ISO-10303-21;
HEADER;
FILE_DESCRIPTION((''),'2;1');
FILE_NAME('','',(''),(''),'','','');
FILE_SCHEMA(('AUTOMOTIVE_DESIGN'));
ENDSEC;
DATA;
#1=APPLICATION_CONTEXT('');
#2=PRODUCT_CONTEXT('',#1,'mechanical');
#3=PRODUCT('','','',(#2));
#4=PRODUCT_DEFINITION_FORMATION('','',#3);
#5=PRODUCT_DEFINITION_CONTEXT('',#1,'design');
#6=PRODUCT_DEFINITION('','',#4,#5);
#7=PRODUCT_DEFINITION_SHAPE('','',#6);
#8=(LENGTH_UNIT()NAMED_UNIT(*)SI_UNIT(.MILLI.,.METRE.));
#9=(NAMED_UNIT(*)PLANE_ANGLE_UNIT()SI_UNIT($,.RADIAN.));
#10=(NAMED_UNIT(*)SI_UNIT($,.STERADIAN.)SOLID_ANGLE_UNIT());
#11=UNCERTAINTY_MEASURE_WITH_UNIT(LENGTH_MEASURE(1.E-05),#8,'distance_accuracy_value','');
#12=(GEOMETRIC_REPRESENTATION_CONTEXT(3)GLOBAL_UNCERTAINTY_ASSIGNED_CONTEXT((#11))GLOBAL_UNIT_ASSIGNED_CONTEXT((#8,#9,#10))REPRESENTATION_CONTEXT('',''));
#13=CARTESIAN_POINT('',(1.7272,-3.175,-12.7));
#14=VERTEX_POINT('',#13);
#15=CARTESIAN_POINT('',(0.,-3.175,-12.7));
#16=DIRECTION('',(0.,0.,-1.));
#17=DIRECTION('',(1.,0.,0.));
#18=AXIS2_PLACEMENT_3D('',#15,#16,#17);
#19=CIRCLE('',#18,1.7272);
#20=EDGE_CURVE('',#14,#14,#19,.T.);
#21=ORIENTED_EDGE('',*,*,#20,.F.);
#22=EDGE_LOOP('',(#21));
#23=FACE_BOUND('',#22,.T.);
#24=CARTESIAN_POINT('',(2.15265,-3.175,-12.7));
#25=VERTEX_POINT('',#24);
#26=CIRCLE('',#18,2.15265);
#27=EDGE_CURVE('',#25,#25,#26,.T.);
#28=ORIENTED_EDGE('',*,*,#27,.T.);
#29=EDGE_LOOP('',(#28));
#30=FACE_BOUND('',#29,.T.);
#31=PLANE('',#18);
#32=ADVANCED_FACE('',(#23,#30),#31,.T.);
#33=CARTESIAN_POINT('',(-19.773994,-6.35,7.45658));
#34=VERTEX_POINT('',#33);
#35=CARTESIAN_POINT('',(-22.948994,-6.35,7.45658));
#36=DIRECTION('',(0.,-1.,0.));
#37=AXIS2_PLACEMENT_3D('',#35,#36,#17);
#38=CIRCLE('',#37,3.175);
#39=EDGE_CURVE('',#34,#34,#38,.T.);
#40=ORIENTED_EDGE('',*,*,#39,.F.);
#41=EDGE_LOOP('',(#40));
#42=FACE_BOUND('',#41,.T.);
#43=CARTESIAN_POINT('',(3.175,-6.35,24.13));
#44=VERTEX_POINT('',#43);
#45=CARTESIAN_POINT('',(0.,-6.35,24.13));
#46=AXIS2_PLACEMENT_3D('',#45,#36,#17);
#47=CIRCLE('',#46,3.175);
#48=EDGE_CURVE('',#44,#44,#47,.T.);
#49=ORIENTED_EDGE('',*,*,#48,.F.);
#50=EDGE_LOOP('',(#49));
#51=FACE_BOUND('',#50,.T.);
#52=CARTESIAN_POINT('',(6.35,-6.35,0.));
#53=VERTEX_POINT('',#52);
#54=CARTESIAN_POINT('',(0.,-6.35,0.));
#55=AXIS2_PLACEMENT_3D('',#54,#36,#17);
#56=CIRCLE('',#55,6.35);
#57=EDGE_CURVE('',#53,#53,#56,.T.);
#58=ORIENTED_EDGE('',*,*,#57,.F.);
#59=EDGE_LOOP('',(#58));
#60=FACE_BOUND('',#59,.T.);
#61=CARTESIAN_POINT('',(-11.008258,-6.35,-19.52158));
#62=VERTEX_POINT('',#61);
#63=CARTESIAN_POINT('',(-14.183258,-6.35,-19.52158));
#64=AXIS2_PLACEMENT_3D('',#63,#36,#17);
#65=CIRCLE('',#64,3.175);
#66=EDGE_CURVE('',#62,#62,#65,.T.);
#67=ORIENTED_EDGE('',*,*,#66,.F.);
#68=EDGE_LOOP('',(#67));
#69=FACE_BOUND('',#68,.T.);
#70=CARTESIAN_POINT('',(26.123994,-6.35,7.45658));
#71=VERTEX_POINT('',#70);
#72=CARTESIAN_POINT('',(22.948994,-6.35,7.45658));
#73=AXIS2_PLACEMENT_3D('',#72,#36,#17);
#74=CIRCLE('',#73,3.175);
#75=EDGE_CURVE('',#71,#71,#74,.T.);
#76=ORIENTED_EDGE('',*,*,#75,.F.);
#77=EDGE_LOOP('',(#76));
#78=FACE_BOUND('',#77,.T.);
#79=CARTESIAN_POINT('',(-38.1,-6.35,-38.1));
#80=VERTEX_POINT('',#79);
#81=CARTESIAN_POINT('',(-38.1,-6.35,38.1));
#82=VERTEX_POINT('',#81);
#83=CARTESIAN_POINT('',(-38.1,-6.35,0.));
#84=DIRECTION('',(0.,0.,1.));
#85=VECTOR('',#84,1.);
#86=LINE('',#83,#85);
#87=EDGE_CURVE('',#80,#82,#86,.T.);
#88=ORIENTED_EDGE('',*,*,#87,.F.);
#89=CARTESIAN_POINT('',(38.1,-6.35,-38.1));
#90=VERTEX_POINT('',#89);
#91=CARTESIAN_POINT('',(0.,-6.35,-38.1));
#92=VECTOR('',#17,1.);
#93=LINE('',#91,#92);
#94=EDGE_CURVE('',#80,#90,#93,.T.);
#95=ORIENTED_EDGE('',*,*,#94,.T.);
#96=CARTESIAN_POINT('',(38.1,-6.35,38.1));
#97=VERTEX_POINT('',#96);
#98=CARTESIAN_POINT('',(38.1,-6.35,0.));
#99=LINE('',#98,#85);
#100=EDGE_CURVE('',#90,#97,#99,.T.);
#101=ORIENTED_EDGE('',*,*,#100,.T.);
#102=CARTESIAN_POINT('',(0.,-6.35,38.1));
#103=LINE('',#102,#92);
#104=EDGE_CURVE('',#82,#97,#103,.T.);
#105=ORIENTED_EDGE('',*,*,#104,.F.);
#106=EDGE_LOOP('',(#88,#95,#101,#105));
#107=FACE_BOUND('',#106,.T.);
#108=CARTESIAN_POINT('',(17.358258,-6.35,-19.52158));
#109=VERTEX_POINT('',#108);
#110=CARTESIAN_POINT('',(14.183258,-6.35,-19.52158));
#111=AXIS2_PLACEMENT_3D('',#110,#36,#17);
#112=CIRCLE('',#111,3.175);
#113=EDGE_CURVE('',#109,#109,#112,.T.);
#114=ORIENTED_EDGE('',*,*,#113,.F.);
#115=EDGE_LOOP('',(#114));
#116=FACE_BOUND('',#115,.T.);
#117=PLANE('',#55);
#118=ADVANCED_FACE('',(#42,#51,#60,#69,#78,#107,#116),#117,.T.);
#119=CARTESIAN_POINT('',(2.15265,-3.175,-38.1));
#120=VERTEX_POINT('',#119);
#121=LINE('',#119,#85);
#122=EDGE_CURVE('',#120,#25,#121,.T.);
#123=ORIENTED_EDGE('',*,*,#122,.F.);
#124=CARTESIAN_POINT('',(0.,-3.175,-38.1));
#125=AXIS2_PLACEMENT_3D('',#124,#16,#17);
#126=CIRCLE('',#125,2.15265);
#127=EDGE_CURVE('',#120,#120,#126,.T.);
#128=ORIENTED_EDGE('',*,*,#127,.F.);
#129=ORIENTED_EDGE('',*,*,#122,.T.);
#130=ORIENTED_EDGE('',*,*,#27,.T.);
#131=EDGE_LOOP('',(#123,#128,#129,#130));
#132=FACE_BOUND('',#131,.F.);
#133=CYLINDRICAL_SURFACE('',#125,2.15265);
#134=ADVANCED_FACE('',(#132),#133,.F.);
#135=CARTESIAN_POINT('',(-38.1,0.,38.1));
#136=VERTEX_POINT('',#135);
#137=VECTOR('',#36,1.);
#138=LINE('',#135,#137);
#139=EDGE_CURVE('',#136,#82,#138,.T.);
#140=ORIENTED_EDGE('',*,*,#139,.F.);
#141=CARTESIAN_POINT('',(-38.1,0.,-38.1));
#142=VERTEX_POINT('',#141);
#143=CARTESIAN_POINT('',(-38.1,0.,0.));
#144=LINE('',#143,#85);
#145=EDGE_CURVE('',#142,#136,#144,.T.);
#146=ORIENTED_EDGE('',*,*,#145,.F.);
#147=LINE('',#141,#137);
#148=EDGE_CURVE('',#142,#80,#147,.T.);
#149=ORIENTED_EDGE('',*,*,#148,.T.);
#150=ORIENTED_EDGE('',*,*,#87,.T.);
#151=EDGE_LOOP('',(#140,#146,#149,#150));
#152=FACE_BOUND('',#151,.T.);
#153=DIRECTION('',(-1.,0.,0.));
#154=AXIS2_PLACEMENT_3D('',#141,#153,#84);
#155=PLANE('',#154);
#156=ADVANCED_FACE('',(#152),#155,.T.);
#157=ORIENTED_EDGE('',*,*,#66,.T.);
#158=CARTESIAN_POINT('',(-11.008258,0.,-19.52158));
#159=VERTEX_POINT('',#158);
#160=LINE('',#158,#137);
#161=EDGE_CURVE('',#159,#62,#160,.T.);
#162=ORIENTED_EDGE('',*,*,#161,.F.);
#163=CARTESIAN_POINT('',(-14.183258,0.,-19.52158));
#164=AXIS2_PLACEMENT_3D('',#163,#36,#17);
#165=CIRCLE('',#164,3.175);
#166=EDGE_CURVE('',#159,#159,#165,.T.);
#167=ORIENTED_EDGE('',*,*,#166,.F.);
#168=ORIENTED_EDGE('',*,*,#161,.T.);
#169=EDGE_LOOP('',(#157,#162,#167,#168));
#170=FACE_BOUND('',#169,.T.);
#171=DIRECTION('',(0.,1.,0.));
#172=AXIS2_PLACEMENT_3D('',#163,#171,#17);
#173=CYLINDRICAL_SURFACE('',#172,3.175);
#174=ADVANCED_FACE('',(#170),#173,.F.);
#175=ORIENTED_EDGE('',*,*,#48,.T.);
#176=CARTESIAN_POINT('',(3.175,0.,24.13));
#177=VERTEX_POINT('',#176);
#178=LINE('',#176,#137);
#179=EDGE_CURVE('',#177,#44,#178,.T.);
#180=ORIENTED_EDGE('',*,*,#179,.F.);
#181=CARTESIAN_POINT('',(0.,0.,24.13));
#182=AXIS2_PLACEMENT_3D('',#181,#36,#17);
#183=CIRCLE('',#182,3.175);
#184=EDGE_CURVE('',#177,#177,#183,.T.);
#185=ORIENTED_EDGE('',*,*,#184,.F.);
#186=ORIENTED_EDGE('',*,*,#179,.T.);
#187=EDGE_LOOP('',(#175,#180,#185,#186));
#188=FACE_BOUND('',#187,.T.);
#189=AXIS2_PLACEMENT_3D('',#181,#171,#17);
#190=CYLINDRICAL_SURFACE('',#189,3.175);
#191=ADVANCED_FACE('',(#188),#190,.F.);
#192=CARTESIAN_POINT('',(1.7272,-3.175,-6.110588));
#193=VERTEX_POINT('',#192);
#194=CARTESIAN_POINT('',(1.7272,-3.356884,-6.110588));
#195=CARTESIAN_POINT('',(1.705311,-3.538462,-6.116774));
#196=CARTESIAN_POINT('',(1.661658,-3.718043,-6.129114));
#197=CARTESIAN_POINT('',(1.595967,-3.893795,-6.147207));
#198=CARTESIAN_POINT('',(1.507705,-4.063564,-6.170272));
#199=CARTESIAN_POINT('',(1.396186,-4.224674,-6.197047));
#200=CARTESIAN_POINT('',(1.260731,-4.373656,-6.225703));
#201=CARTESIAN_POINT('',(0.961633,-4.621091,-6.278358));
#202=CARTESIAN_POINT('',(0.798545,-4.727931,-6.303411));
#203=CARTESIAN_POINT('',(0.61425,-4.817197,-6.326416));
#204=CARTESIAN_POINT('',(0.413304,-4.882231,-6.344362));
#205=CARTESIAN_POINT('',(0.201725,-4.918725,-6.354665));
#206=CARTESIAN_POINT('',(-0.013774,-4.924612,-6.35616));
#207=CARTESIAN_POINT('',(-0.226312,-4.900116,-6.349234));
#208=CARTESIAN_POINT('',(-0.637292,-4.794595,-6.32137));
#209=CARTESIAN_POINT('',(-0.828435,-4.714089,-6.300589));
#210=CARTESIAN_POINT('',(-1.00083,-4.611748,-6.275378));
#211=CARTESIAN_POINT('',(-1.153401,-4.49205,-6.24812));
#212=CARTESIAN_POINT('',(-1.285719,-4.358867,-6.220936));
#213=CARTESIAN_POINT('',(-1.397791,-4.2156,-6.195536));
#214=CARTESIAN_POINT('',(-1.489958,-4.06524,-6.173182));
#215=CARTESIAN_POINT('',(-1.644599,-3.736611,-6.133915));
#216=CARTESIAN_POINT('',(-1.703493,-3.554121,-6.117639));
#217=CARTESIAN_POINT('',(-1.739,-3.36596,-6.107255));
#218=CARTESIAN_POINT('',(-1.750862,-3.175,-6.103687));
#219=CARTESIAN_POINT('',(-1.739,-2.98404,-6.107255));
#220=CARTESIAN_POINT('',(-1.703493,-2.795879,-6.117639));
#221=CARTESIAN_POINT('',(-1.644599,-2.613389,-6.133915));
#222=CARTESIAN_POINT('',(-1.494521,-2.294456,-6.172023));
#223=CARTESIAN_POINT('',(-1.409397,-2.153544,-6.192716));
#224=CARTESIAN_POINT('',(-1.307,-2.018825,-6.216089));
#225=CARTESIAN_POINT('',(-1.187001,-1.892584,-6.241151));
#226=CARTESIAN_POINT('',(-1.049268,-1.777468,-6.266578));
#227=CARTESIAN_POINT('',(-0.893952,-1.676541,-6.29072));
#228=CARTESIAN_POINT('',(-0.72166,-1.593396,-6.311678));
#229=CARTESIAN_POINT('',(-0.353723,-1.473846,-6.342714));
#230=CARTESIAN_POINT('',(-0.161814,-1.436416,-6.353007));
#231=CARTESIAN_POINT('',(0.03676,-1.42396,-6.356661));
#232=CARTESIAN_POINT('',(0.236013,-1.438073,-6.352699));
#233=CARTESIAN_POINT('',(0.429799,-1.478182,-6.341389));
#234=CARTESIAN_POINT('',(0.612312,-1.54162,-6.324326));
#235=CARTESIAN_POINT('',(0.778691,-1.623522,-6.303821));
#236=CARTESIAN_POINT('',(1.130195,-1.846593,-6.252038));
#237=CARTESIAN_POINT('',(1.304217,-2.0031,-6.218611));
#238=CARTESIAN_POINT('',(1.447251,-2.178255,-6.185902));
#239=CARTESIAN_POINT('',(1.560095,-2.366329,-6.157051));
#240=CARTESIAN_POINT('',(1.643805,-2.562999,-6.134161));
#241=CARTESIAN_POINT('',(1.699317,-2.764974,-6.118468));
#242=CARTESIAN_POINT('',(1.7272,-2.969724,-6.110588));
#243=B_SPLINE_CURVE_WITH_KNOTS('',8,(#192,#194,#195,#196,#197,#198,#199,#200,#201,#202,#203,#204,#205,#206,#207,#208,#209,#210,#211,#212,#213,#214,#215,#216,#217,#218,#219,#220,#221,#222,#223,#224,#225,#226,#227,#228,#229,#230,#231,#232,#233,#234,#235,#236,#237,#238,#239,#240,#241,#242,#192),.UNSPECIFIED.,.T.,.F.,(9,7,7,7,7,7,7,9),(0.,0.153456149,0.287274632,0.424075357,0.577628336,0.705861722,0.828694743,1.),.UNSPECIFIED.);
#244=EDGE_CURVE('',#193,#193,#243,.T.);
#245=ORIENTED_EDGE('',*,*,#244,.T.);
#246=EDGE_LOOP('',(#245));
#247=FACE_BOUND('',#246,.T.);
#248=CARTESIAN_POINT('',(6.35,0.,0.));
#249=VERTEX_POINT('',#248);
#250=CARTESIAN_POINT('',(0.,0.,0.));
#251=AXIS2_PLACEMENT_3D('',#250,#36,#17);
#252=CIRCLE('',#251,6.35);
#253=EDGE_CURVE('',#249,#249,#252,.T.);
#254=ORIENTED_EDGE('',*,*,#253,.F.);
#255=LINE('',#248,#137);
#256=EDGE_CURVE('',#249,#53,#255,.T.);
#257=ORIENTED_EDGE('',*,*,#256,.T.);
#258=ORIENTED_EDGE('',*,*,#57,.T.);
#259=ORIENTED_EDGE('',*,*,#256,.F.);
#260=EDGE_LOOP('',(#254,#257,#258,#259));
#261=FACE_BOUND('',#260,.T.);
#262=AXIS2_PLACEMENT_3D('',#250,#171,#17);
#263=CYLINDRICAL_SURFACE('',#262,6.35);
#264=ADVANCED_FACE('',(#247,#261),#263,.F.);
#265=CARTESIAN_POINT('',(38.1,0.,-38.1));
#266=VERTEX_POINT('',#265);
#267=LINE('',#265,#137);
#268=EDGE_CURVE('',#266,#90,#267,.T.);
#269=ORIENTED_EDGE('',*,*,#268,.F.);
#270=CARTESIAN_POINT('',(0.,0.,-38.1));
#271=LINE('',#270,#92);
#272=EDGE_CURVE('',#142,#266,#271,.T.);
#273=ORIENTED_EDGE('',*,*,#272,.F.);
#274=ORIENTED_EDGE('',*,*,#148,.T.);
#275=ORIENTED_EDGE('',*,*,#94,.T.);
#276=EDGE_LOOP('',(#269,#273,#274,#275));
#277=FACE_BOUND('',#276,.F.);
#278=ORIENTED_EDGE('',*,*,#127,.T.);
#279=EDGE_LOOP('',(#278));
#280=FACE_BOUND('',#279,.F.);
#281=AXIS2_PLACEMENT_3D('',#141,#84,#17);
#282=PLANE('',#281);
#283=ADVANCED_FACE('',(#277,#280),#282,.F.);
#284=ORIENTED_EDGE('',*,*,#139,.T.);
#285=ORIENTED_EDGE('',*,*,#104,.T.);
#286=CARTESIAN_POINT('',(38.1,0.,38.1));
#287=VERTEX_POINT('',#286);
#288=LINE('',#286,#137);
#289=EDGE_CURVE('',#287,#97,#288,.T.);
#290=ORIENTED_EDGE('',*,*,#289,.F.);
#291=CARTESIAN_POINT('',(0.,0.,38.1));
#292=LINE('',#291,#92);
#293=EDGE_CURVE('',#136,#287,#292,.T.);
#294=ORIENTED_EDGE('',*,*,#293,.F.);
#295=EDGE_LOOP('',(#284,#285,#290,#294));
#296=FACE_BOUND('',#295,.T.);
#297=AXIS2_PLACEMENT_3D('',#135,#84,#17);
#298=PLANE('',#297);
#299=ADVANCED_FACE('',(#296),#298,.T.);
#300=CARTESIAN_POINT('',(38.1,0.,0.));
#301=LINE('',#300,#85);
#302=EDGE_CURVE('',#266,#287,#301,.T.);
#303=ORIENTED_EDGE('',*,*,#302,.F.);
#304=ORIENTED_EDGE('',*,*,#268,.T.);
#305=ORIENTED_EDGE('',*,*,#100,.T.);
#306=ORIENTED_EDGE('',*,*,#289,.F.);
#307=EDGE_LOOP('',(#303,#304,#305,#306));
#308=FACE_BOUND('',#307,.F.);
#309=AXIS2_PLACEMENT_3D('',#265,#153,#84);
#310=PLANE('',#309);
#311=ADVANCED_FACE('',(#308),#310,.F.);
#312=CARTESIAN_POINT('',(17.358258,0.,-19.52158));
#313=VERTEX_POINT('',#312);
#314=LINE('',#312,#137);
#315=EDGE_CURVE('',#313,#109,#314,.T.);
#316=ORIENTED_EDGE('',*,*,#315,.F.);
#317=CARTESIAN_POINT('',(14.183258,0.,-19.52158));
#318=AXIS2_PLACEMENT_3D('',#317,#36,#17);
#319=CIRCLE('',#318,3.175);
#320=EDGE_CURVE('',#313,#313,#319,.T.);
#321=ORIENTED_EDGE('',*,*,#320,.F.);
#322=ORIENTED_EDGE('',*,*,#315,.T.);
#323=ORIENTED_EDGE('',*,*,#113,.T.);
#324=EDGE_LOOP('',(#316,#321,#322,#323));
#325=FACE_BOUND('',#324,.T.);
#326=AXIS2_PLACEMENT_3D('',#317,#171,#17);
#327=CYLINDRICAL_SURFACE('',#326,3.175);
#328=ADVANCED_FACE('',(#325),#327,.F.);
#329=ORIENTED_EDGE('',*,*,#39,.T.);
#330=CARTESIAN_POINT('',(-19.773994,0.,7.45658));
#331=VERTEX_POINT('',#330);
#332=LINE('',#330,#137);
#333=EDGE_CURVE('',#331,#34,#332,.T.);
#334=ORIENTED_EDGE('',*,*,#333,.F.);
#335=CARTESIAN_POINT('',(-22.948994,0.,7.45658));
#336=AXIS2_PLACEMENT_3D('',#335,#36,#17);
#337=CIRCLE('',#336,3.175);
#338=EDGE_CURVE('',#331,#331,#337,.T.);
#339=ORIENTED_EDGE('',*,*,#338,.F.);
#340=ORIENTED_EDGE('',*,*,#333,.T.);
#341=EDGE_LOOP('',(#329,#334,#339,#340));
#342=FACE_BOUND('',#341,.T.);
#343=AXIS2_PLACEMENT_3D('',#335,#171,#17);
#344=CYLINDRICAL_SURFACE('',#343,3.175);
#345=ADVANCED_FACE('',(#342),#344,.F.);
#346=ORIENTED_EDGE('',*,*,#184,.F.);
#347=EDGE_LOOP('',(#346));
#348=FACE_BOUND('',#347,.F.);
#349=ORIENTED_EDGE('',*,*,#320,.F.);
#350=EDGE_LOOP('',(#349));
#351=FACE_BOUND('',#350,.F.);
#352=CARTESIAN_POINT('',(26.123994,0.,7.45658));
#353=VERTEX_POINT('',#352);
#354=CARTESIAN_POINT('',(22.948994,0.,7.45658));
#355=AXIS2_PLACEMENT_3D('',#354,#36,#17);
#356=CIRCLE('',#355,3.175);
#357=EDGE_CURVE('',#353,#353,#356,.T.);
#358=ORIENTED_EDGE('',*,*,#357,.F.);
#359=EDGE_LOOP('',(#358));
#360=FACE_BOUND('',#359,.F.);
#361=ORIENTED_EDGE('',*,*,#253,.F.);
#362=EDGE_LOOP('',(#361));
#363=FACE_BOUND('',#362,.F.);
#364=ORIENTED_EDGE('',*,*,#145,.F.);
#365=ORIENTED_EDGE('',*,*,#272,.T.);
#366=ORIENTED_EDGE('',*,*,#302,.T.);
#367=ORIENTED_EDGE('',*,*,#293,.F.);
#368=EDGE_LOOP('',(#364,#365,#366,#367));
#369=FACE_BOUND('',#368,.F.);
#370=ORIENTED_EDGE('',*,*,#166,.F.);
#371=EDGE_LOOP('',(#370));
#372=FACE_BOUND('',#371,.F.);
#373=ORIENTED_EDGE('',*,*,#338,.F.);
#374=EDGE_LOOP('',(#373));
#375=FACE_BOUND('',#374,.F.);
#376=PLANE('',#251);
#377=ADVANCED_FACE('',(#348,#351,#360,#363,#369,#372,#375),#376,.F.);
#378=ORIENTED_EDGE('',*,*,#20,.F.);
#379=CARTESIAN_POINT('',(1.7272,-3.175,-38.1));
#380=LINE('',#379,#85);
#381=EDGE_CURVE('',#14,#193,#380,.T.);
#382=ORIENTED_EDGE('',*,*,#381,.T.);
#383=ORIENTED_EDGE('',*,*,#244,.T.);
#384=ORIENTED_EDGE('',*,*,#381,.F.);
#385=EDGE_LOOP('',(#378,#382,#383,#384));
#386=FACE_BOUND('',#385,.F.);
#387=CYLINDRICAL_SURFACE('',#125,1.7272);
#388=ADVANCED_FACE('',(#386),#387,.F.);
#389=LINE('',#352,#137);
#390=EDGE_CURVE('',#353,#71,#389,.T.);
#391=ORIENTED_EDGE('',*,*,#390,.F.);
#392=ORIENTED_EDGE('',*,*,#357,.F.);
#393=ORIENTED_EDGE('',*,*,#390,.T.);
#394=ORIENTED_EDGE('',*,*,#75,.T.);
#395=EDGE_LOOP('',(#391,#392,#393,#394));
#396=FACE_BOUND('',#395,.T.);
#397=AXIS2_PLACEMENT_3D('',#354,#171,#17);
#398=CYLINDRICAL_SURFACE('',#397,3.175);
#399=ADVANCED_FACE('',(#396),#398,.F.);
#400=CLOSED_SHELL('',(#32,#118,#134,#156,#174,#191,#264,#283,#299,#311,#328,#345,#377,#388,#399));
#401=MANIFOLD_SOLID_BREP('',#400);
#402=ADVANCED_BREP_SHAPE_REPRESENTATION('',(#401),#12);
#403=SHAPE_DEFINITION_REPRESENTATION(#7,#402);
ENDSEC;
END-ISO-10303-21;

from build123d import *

# Parameters (mm, degrees)
F0_W     = 76.2
F0_H     = 76.2
F0_R     = 3.175
F0_R_2   = 6.35
F1_DEPTH = 6.35
F2_R     = 2.15265
F3_DEPTH = 25.4
F4_R     = 1.7272
F5_REACH = 81.0862593299


with BuildPart() as f1:
    # F0 (on Front) → F1 (new body)
    with BuildSketch(Plane.XZ):
        Rectangle(F0_W, F0_H)
        with Locations((-14.1832581378, -19.5215800743)):
            Circle(F0_R, mode=Mode.SUBTRACT)
        with Locations((14.1832581378, -19.5215800743)):
            Circle(F0_R, mode=Mode.SUBTRACT)
        with Locations((-22.9489937382, 7.4565800743)):
            Circle(F0_R, mode=Mode.SUBTRACT)
        Circle(F0_R_2, mode=Mode.SUBTRACT)
        with Locations((22.9489937382, 7.4565800743)):
            Circle(F0_R, mode=Mode.SUBTRACT)
        with Locations((0, 24.13)):
            Circle(F0_R, mode=Mode.SUBTRACT)
    extrude(amount=F1_DEPTH)

    # F2 (on face) → F3 (cut)
    with BuildSketch(Plane(origin=(0, 0, -38.1), x_dir=(1, 0, 0), z_dir=(0, 0, -1))):
        with Locations((0, 3.175)):
            Circle(F2_R)
    extrude(amount=-F3_DEPTH, mode=Mode.SUBTRACT)

    f5_end = f1.faces().sort_by_distance((-6.35, -3.175, 0))[0]
    # F4 (on face) → F5 (cut, up to a face of the model that its end follows)
    with BuildSketch(Plane(origin=(0, 0, -38.1), x_dir=(1, 0, 0), z_dir=(0, 0, -1))):
        with Locations((0, 3.175)):
            Circle(F4_R)
    f5_long = extrude(amount=-F5_REACH, mode=Mode.PRIVATE)
    add(split(f5_long, bisect_by=f5_end, keep=Keep.ALL, mode=Mode.PRIVATE).solids().sort_by_distance((0, -3.175, -38.1))[0], mode=Mode.SUBTRACT)


solid = f1.part
